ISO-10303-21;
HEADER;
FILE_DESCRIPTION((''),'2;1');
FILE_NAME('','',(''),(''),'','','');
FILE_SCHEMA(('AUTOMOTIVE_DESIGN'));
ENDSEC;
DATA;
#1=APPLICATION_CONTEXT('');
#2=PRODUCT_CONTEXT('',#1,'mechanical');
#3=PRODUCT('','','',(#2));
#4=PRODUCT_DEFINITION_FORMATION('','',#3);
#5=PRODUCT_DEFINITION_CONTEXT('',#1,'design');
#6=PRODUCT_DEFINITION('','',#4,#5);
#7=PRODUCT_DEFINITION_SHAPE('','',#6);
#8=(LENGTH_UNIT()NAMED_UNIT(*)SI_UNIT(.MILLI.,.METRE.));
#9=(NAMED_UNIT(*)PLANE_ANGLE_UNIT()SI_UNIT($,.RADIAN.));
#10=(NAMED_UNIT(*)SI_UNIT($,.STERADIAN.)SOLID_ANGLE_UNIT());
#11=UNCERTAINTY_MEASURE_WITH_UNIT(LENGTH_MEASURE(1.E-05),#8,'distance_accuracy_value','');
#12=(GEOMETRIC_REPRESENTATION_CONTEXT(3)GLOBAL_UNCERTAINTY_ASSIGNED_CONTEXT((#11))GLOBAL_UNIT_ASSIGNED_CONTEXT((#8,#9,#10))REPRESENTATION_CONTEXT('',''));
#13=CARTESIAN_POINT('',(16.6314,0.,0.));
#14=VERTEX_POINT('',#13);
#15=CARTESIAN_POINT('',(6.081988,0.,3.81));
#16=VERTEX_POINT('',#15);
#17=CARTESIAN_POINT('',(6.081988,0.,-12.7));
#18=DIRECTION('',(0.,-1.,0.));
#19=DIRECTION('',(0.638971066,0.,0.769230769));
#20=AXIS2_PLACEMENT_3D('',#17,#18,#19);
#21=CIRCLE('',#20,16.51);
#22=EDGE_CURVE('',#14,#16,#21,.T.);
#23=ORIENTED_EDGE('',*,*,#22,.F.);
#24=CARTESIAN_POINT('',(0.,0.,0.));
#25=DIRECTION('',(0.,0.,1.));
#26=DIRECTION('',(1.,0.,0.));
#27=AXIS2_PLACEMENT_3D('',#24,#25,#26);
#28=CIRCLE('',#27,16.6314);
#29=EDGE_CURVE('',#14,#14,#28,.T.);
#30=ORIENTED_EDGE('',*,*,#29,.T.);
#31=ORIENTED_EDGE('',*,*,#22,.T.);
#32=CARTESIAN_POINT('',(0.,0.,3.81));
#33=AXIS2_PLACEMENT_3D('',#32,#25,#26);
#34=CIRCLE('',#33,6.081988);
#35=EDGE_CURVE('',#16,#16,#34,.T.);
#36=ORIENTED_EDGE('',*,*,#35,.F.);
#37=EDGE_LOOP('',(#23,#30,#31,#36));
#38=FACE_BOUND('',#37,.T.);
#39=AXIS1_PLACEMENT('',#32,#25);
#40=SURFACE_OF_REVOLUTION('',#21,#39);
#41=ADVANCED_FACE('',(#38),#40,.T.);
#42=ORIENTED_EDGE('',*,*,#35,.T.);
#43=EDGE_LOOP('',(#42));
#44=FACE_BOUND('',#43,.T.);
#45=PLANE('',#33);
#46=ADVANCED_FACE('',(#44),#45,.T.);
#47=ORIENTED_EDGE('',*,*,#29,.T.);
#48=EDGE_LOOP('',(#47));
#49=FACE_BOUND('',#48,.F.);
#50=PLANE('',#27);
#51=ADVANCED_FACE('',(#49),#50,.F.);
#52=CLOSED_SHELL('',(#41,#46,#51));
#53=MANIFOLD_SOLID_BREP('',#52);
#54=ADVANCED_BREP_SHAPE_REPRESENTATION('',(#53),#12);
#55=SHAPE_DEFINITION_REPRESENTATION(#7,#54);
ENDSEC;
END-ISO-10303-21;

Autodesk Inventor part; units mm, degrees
ref_plane "YZ Plane" through (0, 0, 0) normal (1, 0, 0) x (0, 1, 0)
ref_plane "XZ Plane" through (0, 0, 0) normal (0, 1, 0) x (-1, 0, 0)
ref_plane "XY Plane" through (0, 0, 0) normal (0, 0, 1) x (1, 0, 0)
sketch "Sketch1" plane through (0, 0, 0) normal (0, 0, 1) x (1, 0, 0)
  circle A0 centre (0, 0) radius 16.6314
extrude "Extrusion1" add sketch "Sketch1" along normal blind 3.81
fillet "Fillet1" radius 16.51 1 edges at (-16.6314, 0, 3.81)
properties part number "lensGlass" material "Glass"
